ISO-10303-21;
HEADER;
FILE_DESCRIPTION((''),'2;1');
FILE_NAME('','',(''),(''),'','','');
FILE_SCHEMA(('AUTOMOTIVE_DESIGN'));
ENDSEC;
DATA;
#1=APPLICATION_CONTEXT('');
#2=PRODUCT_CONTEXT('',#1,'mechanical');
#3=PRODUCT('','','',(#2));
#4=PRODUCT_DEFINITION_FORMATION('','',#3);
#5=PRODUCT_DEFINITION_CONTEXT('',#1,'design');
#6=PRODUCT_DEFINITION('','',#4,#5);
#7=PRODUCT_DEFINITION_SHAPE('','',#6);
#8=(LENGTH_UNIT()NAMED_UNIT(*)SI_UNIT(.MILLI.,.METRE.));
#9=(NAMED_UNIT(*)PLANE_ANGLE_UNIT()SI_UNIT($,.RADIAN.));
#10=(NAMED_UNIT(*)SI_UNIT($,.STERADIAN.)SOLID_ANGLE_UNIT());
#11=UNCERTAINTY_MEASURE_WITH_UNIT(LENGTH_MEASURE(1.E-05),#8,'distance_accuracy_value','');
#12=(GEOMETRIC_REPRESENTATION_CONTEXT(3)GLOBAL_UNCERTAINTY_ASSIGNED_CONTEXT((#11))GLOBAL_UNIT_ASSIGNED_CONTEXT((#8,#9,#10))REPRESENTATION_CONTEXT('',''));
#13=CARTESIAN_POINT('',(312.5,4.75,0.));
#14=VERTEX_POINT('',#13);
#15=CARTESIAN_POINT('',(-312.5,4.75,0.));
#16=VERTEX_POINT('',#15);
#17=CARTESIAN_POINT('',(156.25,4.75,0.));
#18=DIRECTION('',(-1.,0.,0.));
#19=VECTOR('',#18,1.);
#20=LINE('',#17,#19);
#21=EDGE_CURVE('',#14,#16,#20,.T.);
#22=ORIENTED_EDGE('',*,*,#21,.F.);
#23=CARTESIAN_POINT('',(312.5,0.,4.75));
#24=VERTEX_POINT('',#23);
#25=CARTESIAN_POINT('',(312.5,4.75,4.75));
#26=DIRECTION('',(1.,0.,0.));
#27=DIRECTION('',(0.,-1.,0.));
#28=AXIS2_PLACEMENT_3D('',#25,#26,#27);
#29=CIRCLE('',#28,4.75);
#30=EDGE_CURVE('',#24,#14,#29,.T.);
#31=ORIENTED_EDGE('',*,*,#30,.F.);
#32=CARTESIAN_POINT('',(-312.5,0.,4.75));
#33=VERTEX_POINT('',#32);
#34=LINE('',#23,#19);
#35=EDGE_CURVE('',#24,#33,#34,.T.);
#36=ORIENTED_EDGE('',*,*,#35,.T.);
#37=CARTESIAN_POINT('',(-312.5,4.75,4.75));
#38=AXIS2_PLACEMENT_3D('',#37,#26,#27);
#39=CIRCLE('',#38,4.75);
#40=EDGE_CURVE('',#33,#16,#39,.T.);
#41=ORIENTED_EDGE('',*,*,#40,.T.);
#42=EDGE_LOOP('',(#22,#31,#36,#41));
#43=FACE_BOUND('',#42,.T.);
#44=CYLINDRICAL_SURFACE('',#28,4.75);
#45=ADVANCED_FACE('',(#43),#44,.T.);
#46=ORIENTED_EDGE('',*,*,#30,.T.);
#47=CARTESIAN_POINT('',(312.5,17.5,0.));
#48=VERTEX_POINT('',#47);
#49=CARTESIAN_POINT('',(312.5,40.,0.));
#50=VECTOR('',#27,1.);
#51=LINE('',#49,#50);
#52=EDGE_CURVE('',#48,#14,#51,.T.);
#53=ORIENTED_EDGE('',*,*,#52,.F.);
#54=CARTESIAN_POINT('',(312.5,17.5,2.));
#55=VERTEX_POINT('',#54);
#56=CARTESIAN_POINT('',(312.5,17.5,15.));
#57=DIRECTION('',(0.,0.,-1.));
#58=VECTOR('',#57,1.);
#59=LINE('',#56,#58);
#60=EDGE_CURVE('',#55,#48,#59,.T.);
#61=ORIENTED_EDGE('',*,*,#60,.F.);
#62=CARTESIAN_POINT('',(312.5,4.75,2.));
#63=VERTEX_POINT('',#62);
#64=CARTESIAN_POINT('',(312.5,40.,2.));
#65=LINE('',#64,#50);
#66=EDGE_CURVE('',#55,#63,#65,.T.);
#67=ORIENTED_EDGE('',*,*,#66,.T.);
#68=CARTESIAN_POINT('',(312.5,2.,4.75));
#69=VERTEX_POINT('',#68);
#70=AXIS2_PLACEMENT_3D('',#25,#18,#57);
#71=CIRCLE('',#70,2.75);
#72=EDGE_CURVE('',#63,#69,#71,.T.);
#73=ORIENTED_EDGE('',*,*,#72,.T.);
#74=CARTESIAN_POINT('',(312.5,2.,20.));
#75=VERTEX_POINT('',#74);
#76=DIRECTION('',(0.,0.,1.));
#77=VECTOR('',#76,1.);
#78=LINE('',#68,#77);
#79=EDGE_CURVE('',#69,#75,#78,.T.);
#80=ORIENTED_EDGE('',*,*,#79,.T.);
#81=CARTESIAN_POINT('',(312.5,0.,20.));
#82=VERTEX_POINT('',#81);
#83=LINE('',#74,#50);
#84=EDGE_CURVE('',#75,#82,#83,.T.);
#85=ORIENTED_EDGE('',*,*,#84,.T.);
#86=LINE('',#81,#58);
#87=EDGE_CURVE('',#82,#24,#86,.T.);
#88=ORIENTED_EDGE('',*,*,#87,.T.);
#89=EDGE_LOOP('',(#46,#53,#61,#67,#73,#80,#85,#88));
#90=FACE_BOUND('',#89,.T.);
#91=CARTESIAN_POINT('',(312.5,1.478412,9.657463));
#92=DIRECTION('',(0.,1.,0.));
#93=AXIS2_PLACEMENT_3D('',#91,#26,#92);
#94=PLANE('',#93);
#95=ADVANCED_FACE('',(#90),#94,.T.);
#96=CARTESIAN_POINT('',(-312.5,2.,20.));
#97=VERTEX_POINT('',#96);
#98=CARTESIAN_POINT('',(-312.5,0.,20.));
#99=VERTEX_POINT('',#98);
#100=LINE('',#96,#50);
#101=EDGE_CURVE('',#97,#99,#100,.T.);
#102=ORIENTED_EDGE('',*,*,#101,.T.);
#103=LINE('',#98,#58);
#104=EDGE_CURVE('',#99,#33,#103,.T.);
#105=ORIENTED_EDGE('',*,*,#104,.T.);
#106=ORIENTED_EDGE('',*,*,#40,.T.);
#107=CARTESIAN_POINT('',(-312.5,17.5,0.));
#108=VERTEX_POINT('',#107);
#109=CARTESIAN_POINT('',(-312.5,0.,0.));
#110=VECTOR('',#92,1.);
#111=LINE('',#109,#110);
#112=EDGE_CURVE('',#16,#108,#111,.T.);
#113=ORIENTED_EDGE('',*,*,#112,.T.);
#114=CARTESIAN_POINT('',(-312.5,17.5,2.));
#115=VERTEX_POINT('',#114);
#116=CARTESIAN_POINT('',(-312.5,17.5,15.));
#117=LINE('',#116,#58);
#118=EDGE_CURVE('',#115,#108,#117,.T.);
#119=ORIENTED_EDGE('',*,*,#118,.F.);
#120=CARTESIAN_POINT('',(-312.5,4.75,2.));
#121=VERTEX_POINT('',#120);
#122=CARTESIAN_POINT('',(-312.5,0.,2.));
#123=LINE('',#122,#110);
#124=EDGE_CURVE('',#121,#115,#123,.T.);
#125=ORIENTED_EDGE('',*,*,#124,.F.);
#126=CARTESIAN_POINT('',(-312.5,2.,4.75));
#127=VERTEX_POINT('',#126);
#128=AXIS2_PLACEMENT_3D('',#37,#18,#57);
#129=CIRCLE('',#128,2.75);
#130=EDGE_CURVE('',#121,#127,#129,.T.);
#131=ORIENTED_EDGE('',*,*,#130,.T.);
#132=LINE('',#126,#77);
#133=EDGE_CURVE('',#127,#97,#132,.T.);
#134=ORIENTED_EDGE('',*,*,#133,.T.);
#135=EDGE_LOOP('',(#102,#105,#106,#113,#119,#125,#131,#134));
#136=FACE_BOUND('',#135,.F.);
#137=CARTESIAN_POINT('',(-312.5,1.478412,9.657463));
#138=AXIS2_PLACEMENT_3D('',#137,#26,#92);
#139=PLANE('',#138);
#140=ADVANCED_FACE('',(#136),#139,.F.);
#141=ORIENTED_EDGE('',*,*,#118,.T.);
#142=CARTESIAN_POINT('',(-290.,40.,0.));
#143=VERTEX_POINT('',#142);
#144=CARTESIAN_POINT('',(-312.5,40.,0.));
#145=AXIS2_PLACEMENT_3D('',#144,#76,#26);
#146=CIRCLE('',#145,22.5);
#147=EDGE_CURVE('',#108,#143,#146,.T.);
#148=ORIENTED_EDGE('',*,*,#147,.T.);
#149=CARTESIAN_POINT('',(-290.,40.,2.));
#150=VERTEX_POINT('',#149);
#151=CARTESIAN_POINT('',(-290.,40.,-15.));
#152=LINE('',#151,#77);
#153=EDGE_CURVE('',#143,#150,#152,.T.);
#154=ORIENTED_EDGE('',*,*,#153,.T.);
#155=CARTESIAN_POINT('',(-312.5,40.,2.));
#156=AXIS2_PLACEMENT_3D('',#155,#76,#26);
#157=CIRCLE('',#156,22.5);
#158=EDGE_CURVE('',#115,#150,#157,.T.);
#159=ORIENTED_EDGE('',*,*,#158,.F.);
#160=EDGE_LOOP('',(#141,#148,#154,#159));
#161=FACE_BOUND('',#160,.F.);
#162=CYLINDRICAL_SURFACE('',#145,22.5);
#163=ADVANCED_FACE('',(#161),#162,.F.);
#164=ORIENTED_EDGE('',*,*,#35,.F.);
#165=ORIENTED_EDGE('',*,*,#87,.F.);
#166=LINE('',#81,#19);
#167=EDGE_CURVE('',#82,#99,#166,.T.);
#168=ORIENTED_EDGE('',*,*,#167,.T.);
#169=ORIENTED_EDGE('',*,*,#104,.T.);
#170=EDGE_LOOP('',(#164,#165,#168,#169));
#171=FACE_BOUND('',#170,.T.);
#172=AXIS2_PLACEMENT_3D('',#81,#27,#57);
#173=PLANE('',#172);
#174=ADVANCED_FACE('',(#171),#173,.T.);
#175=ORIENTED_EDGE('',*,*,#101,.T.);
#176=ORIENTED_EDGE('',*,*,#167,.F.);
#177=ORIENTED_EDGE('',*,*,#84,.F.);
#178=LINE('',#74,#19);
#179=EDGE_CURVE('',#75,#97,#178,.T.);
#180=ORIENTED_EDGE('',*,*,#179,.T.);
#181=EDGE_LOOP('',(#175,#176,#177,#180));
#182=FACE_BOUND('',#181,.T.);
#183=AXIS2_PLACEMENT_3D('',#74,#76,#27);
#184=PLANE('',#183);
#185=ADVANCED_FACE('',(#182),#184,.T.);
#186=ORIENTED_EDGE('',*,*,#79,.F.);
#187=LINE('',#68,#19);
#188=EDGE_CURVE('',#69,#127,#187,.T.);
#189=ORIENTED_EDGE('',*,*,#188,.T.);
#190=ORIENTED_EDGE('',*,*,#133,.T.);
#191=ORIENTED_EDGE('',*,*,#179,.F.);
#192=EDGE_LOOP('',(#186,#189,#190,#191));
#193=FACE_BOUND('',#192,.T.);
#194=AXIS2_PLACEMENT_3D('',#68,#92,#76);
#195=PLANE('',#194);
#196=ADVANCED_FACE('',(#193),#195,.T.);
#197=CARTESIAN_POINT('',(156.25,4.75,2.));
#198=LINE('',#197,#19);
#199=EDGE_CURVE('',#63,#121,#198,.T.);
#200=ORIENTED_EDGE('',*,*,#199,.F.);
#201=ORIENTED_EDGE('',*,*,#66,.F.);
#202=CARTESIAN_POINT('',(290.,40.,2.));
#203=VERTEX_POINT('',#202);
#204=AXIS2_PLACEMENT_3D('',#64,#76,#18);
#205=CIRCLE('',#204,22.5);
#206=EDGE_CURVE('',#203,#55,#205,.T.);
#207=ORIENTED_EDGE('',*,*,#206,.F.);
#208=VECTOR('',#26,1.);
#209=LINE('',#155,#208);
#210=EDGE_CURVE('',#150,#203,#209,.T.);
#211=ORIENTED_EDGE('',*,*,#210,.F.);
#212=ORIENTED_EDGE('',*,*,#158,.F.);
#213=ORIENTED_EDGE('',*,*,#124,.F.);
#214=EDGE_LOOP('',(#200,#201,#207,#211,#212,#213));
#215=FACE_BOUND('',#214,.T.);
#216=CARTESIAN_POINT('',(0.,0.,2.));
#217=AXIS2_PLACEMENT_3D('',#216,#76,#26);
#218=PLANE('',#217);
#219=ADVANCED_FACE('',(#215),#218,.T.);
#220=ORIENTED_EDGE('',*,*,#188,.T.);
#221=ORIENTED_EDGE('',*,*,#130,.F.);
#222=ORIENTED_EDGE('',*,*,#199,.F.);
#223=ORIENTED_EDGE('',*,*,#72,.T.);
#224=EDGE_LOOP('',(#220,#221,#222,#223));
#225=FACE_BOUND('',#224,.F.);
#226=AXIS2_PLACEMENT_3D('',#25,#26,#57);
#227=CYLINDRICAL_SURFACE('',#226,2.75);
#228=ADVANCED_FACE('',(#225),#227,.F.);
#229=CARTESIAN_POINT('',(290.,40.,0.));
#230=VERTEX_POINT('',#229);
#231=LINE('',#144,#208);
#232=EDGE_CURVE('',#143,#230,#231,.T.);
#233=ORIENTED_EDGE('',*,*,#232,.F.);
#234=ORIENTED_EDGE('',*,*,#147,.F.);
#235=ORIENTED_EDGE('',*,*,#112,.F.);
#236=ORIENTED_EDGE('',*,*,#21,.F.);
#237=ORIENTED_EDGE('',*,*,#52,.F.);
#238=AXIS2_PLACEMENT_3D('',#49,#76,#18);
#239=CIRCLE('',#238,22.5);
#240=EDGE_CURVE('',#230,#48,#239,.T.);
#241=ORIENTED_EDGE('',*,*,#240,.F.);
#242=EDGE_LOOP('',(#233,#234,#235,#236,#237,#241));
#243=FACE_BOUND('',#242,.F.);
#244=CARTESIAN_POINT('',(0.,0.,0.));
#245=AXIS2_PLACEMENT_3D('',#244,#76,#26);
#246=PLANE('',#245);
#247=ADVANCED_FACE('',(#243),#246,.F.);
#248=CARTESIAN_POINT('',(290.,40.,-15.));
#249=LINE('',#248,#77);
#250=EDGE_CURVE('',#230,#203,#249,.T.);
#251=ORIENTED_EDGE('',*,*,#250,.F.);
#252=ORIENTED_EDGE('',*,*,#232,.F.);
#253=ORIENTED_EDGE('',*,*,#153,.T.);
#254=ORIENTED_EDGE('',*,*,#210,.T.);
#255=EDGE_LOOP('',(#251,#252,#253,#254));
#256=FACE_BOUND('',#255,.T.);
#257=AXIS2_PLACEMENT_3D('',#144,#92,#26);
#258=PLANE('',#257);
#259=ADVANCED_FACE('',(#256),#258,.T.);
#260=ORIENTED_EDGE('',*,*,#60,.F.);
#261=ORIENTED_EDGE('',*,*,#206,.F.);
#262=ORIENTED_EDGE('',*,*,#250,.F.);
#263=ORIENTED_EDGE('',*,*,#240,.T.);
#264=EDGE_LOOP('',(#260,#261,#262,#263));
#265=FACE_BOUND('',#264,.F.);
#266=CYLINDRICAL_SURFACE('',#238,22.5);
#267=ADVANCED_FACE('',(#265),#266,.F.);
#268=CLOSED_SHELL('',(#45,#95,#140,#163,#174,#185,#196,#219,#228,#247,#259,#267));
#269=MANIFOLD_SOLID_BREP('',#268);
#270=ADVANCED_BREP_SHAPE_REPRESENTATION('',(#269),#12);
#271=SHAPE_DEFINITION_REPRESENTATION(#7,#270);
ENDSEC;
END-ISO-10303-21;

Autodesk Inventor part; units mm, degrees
ref_plane "YZ Plane" through (0, 0, 0) normal (1, 0, 0) x (0, 1, 0)
ref_plane "XZ Plane" through (0, 0, 0) normal (0, 1, 0) x (-1, 0, 0)
ref_plane "XY Plane" through (0, 0, 0) normal (0, 0, 1) x (1, 0, 0)
sketch "Sketch1" plane through (0, 0, 0) normal (0, 0, 1) x (1, 0, 0)
  line L0 (-312.5, 40) -> (312.5, 40)
  line L1 (312.5, 40) -> (312.5, 0)
  line L2 (312.5, 0) -> (-312.5, 0)
  line L3 (-312.5, 0) -> (-312.5, 40)
  point P0 (0, 0)
  point P1 (0, 0)
  dimension "d1" = 40
  dimension "d45" = 625
extrude "Plate1" add sketch "Sketch1" along normal blind 2
sketch "Sketch2" plane through (312.5, 2, 0) normal (0, -1, 0) x (1, 0, 0)
  line L0 (-625, 0) -> (0, 0)
  line L1 (0, 0) -> (0, 20)
  line L2 (0, 20) -> (-625, 20)
  line L3 (-625, 20) -> (-625, 0)
edge flange "Flange1" height 20 angle 90 thickness 2 bend radius 2.75 thickness toward (0, -1, 0) relief round relief width 2 relief depth 1 edges at (0, 0, 2) wall of the first edge with corners at (-312.5, 2, 0) (312.5, 2, 0) (312.5, 2, 20) (-312.5, 2, 20)
bend "Bend1"
corner "Corner1"
sketch "Sketch6" plane through (0, 0, 0) normal (0, 0, -1) x (-1, 0, 0)
  line L0 (-312.5, 40) -> (-312.5, 4.75) projected
  circle A0 centre (-312.5, 40) radius 22.5
  line L1 (-312.5, 40) -> (312.5, 40) projected
  line L2 (-499, 30) -> (-499, 67.6691) projected
  point P0 (0, 0)
  point P1 (-290, 40)
  point P2 (-312.5, 17.5)
  point P3 (312.5, 40)
  dimension "d24" = 45
extrude "Extrusion2" cut sketch "Sketch6" along normal mid plane 30 contours L1 A0 L0 picked at (-297.688, 38.3311)
sketch "Sketch9" plane through (0, 0, 2) normal (0, 0, 1) x (1, 0, 0)
  line L0 (95.482, 35) -> (95.482, 23) construction
  line L1 (95.482, 23) -> (-104.518, 23) construction
  line L2 (-104.518, 23) -> (-104.518, 35) construction
  line L3 (-104.518, 35) -> (95.482, 35) construction
  line L4 (-312.5, 40) -> (312.5, 40) projected
  point P0 (0, 0)
  dimension "d40" = 200
  dimension "d41" = 12
  dimension "d43" = 5
mark "Mark2"
mirror "Mirror3" about plane through (0, 0, 0) normal (1, 0, 0) of "Extrusion2"
equation "\"d43\" = d42"
equation "\"d2\" = Thickness"
equation "\"d3\" = BendReliefWidth"
equation "\"d4\" = BendReliefDepth"
equation "\"d5\" = MinimumRemnant"
equation "\"d6\" = TransitionRadius"
equation "\"d9\" = BendRadius"
equation "\"d10\" = CornerReliefSize"
equation "\"d11\" = GapSize"
equation "\"d12\" = JacobiRadiusSize"
equation "\"GapSize\" = Thickness"
equation "\"MinimumRemnant\" = 2 * Thickness"
equation "\"BendReliefDepth\" = 0.5 * Thickness"
equation "\"BendReliefWidth\" = Thickness"
equation "\"CornerReliefSize\" = 4 * Thickness"
equation "\"JacobiRadiusSize\" = BendRadius"
equation "\"TransitionRadius\" = BendRadius"
equation "\"qqqqqq\" = 67.35706"
equation "\"d42\" = 5"
equation "\"Thickness\" = 2"
equation "\"BendRadius\" = 2.75"
properties part number "MSC 408 STRINGER LOWERBACK" material "Stainless Steel"
